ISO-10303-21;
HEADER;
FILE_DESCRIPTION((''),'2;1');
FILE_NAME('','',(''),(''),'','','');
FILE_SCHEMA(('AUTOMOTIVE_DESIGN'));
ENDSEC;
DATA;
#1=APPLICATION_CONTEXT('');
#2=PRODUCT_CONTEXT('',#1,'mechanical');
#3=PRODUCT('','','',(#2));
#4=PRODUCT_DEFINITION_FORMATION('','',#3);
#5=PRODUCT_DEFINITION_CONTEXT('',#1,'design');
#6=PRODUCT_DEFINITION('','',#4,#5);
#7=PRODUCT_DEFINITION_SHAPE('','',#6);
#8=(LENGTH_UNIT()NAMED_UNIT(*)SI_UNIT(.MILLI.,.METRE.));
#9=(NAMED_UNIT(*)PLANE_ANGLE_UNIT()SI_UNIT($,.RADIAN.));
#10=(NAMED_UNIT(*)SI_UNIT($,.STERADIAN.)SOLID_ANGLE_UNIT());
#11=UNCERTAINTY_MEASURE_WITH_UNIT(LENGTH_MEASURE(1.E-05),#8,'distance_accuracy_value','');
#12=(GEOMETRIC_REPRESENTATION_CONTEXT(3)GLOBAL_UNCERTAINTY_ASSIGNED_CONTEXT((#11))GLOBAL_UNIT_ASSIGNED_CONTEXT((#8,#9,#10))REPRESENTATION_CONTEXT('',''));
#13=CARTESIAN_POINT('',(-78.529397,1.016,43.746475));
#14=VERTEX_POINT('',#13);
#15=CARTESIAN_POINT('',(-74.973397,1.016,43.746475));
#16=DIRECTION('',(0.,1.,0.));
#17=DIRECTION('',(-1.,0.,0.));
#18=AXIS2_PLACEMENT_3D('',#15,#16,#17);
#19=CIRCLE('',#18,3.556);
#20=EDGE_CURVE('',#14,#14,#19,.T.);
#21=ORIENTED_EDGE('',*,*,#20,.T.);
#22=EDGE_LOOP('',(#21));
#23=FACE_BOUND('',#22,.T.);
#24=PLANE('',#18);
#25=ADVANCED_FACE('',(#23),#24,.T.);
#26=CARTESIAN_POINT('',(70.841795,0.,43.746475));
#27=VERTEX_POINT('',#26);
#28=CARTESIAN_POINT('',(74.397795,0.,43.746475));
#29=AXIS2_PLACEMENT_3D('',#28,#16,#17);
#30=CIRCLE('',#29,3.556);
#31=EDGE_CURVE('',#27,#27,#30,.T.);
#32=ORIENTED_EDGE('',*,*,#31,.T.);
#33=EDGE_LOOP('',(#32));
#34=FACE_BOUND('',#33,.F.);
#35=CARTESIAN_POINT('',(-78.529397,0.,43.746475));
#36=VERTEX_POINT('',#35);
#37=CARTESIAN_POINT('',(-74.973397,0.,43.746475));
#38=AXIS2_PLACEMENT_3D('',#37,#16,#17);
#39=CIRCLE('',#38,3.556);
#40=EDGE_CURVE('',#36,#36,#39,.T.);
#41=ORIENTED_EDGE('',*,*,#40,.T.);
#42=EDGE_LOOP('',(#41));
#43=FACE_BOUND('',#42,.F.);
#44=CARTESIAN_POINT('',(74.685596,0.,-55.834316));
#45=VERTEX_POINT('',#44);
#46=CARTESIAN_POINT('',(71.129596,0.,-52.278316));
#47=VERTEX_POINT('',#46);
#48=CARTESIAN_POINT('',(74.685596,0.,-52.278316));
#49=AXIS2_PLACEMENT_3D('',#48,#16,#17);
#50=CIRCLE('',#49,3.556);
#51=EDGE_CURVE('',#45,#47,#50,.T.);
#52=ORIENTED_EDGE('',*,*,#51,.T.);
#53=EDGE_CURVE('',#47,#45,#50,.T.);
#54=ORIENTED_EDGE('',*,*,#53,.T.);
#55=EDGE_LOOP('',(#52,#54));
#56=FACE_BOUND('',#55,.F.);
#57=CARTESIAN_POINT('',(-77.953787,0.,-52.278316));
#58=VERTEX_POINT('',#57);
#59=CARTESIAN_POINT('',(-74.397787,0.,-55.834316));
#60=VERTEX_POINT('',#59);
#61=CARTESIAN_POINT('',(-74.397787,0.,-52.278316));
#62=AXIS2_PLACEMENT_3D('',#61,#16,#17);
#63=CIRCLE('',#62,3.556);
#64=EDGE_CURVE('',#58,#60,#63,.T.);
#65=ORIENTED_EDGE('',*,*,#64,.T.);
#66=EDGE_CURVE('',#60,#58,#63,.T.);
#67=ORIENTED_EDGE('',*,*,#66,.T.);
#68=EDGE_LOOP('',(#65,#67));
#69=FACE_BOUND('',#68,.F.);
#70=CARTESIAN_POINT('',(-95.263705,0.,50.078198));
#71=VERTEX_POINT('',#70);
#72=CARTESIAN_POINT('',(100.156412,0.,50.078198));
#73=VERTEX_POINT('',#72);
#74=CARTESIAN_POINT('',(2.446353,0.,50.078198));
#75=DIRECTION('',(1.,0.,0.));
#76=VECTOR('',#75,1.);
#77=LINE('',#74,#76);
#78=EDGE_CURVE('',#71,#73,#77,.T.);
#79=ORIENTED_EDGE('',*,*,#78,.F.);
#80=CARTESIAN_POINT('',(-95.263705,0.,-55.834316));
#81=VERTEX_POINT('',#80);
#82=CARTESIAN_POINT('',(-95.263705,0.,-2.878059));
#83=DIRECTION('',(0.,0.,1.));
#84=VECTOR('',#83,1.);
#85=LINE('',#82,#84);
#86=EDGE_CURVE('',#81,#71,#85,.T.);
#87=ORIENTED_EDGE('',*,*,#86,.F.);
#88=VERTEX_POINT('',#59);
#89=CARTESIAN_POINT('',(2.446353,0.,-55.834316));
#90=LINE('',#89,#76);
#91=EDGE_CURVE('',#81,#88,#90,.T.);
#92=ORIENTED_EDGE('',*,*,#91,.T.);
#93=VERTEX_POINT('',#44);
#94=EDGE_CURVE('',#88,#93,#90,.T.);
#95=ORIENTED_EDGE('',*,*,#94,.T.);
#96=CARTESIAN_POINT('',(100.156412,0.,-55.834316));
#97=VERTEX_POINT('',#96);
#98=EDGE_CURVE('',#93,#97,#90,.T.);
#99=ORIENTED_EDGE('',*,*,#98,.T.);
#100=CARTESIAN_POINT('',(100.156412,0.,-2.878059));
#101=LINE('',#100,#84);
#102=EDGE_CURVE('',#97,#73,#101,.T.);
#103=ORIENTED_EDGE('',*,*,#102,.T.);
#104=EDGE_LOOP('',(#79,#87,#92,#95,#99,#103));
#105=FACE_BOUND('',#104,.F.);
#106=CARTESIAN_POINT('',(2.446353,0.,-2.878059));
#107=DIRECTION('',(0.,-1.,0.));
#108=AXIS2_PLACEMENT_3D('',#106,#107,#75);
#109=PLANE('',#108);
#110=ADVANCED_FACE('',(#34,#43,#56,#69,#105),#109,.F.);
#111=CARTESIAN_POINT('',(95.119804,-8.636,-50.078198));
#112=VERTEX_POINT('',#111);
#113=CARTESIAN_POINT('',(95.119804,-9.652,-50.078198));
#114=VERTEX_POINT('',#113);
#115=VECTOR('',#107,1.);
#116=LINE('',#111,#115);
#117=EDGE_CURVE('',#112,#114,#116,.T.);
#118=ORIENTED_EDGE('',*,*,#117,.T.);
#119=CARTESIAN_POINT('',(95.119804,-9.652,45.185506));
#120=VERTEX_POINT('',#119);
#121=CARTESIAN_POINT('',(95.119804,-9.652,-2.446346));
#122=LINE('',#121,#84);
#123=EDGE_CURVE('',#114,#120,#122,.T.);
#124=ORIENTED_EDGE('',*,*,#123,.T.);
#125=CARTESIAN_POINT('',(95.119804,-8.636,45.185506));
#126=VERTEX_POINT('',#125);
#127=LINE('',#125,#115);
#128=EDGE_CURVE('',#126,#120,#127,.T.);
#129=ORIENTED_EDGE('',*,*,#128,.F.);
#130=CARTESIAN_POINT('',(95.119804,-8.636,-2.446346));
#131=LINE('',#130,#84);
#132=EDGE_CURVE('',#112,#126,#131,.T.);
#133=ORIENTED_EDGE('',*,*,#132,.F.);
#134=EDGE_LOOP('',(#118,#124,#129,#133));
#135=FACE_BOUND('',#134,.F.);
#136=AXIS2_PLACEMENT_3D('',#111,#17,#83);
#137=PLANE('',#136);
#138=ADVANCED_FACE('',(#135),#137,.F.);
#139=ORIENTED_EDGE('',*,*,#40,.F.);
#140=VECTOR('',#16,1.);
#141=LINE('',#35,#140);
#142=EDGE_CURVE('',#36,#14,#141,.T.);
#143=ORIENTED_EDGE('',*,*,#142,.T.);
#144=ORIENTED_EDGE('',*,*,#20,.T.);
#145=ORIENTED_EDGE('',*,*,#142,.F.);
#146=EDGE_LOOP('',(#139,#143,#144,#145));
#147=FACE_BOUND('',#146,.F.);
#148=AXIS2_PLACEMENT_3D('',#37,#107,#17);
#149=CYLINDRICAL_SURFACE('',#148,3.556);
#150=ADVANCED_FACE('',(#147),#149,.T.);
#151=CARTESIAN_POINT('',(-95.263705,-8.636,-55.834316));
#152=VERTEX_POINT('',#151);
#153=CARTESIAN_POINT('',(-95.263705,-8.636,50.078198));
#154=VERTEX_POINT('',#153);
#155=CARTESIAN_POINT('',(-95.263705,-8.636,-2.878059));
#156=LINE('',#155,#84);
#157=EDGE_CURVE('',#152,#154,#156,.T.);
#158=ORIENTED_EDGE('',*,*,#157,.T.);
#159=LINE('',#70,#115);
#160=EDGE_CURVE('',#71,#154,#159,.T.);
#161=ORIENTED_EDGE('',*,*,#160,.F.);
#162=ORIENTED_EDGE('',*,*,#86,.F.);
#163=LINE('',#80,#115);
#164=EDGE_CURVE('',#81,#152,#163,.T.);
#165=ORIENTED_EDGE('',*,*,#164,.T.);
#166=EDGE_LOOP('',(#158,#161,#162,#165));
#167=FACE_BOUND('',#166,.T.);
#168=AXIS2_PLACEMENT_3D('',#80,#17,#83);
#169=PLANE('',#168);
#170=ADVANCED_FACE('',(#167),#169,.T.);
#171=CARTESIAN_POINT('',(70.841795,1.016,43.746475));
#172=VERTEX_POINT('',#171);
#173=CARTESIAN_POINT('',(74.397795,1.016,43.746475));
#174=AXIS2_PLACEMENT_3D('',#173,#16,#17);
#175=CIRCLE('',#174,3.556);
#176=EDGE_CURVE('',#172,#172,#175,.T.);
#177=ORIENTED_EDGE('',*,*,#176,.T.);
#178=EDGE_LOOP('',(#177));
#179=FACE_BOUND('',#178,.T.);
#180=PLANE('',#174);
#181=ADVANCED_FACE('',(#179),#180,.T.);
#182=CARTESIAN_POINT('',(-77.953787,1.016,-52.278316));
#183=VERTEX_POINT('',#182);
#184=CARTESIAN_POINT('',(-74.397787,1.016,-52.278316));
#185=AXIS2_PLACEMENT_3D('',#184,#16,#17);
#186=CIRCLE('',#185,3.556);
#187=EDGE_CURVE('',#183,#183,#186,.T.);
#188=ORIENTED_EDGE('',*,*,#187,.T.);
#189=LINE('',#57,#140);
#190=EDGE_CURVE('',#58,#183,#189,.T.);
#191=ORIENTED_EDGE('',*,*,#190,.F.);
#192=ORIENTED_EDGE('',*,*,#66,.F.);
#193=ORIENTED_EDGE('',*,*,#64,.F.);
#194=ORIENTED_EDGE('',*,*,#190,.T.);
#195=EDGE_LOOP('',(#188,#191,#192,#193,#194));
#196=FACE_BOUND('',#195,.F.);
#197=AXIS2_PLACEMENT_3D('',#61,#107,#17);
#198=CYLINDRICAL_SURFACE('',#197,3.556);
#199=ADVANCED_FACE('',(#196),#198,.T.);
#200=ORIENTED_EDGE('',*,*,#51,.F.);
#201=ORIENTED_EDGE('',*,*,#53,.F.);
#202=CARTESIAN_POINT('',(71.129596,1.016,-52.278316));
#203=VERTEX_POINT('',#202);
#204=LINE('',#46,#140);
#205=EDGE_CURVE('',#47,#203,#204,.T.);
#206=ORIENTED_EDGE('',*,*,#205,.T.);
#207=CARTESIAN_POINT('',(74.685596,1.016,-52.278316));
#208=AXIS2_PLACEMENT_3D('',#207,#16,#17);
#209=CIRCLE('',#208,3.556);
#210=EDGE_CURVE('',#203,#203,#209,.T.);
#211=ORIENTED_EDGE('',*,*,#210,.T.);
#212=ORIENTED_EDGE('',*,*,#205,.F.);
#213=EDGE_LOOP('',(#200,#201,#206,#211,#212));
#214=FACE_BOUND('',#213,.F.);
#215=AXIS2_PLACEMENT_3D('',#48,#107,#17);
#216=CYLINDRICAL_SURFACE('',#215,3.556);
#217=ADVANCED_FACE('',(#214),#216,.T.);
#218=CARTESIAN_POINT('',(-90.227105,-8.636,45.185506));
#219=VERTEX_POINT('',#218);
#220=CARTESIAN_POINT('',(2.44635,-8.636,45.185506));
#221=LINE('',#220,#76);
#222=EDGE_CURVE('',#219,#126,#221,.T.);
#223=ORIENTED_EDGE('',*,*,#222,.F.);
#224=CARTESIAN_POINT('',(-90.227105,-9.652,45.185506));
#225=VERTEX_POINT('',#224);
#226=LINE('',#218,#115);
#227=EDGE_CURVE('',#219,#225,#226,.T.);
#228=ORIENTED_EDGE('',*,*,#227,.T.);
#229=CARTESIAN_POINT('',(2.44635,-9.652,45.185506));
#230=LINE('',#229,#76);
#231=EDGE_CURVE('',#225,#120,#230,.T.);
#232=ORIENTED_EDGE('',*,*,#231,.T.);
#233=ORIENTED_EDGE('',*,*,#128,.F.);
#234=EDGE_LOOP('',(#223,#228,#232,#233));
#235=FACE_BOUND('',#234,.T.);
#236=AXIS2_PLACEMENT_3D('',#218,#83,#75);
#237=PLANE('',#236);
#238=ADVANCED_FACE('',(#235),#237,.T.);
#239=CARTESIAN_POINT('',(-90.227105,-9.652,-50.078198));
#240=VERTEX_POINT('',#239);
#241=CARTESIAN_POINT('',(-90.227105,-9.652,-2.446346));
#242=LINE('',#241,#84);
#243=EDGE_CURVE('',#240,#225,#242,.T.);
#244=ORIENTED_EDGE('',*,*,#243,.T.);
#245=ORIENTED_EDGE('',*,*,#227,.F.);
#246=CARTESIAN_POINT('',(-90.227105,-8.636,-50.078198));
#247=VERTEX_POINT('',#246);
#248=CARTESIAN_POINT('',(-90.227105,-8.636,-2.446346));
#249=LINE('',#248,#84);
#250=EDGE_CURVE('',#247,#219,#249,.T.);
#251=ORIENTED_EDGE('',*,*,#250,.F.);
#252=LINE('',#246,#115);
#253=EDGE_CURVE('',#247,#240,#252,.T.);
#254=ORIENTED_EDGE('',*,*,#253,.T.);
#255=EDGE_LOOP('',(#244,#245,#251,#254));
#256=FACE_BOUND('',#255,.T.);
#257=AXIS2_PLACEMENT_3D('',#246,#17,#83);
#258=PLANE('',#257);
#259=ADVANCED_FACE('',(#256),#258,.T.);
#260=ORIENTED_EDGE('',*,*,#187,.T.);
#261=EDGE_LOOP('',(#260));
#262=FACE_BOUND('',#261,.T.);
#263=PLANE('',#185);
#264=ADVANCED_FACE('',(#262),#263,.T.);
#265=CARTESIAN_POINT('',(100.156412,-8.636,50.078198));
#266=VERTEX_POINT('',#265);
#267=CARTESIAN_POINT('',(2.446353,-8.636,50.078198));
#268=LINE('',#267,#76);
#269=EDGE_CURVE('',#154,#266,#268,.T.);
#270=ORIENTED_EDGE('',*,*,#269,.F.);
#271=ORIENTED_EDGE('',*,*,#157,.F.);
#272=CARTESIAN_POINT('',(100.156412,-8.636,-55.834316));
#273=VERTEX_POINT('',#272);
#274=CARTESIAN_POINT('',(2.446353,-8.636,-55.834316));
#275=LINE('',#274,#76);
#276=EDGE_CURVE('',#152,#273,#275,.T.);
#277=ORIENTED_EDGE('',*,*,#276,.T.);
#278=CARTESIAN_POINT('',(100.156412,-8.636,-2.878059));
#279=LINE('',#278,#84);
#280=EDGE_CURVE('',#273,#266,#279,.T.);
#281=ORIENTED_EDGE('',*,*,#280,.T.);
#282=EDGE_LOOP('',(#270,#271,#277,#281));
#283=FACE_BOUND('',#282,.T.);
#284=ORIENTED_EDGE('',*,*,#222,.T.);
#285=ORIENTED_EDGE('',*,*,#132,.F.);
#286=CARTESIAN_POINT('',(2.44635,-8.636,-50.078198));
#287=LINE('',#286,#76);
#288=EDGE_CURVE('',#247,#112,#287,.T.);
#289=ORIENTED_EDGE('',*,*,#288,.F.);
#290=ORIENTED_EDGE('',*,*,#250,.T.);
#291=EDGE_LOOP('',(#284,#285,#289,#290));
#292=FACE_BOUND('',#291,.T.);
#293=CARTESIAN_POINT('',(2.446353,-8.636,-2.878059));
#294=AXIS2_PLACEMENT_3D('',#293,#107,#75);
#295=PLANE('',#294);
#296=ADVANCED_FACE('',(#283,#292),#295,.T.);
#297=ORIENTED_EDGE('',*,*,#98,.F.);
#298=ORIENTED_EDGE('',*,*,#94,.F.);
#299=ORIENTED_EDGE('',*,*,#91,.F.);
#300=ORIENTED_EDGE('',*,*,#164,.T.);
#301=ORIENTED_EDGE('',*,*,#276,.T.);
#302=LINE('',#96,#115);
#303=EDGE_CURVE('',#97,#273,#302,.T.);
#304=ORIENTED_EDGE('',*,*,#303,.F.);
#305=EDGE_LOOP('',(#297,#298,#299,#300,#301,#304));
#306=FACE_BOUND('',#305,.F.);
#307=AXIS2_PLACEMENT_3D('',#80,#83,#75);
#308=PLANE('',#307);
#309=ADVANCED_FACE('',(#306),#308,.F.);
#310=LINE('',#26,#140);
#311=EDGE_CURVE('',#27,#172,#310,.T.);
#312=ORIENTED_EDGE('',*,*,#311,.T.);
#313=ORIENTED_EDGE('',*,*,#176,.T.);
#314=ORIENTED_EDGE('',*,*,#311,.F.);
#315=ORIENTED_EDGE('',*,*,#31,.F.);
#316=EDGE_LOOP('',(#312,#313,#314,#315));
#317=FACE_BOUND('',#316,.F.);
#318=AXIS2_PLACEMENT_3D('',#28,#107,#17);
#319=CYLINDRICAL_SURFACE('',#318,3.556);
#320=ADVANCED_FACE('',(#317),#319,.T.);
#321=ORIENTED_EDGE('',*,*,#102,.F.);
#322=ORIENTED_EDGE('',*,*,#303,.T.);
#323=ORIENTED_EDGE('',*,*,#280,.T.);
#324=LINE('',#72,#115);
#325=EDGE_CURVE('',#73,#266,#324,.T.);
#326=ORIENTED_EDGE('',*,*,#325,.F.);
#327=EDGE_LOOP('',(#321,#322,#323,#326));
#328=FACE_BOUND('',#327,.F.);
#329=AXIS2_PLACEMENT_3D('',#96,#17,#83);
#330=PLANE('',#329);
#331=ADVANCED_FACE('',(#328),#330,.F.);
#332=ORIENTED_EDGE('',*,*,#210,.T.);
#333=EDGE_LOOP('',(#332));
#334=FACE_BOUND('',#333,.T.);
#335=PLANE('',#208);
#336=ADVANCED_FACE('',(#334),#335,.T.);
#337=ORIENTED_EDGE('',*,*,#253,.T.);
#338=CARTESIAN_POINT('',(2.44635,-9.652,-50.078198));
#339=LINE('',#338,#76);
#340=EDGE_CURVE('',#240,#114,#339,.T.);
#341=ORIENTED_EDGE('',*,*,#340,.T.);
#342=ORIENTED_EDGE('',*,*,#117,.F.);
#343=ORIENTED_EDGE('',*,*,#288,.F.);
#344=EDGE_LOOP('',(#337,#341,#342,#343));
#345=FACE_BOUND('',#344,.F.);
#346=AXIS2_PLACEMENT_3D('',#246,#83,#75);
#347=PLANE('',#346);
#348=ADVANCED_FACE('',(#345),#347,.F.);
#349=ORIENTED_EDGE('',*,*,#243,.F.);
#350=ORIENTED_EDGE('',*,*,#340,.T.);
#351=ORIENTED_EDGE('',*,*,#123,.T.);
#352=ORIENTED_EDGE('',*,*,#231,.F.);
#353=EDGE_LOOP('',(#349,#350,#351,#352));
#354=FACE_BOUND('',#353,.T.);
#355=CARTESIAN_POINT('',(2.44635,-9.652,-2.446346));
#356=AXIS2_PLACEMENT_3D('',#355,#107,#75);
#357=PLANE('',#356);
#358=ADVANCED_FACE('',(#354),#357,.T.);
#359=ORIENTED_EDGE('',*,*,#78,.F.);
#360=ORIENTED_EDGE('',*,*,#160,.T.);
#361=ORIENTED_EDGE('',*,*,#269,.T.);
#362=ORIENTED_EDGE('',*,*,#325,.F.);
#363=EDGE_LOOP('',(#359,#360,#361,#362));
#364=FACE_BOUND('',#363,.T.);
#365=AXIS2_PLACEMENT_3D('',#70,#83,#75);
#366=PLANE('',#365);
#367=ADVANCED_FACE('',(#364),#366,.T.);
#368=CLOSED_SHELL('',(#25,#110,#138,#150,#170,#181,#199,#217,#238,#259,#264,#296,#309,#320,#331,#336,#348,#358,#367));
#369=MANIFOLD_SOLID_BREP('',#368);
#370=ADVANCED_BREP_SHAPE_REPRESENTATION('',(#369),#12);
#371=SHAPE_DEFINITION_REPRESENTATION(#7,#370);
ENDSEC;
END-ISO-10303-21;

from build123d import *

# Parameters (mm, degrees)
F0_W     = 195.4201161861
F0_H     = 105.9125140309
F1_DEPTH = 8.636
F2_W     = 185.3469088674
F2_H     = 95.2637046576
F3_DEPTH = 1.016
F4_R     = 3.556
F5_DEPTH = 1.016


# Not quite as in the source:
# - a feature names something its author has since deleted; it is built from what else it names


with BuildPart() as f1:
    # F0 (on Front) → F1 (new body)
    with BuildSketch(Plane.XZ):
        with Locations((2.4463534355, -2.8780587018)):
            Rectangle(F0_W, F0_H)
    extrude(amount=F1_DEPTH)

    # F2 (on face) → F3 (join)
    with BuildSketch(Plane.XZ.offset(8.636)):
        with Locations((2.4463497102, -2.4463459849)):
            Rectangle(F2_W, F2_H)
    extrude(amount=F3_DEPTH)

    # F4 (on face) → F5 (join)
    with BuildSketch(Plane(origin=(0, 0, 0), x_dir=(-1, 0, 0), z_dir=(0, 1, 0))):
        with Locations((-74.3977949023, 43.7464751303)):
            Circle(F4_R)
        with Locations((-74.6855959296, -52.2783157172)):
            Circle(F4_R)
        with Locations((74.3977874517, -52.2783157172)):
            Circle(F4_R)
        with Locations((74.9733969569, 43.7464751303)):
            Circle(F4_R)
    extrude(amount=F5_DEPTH)


solid = f1.part
